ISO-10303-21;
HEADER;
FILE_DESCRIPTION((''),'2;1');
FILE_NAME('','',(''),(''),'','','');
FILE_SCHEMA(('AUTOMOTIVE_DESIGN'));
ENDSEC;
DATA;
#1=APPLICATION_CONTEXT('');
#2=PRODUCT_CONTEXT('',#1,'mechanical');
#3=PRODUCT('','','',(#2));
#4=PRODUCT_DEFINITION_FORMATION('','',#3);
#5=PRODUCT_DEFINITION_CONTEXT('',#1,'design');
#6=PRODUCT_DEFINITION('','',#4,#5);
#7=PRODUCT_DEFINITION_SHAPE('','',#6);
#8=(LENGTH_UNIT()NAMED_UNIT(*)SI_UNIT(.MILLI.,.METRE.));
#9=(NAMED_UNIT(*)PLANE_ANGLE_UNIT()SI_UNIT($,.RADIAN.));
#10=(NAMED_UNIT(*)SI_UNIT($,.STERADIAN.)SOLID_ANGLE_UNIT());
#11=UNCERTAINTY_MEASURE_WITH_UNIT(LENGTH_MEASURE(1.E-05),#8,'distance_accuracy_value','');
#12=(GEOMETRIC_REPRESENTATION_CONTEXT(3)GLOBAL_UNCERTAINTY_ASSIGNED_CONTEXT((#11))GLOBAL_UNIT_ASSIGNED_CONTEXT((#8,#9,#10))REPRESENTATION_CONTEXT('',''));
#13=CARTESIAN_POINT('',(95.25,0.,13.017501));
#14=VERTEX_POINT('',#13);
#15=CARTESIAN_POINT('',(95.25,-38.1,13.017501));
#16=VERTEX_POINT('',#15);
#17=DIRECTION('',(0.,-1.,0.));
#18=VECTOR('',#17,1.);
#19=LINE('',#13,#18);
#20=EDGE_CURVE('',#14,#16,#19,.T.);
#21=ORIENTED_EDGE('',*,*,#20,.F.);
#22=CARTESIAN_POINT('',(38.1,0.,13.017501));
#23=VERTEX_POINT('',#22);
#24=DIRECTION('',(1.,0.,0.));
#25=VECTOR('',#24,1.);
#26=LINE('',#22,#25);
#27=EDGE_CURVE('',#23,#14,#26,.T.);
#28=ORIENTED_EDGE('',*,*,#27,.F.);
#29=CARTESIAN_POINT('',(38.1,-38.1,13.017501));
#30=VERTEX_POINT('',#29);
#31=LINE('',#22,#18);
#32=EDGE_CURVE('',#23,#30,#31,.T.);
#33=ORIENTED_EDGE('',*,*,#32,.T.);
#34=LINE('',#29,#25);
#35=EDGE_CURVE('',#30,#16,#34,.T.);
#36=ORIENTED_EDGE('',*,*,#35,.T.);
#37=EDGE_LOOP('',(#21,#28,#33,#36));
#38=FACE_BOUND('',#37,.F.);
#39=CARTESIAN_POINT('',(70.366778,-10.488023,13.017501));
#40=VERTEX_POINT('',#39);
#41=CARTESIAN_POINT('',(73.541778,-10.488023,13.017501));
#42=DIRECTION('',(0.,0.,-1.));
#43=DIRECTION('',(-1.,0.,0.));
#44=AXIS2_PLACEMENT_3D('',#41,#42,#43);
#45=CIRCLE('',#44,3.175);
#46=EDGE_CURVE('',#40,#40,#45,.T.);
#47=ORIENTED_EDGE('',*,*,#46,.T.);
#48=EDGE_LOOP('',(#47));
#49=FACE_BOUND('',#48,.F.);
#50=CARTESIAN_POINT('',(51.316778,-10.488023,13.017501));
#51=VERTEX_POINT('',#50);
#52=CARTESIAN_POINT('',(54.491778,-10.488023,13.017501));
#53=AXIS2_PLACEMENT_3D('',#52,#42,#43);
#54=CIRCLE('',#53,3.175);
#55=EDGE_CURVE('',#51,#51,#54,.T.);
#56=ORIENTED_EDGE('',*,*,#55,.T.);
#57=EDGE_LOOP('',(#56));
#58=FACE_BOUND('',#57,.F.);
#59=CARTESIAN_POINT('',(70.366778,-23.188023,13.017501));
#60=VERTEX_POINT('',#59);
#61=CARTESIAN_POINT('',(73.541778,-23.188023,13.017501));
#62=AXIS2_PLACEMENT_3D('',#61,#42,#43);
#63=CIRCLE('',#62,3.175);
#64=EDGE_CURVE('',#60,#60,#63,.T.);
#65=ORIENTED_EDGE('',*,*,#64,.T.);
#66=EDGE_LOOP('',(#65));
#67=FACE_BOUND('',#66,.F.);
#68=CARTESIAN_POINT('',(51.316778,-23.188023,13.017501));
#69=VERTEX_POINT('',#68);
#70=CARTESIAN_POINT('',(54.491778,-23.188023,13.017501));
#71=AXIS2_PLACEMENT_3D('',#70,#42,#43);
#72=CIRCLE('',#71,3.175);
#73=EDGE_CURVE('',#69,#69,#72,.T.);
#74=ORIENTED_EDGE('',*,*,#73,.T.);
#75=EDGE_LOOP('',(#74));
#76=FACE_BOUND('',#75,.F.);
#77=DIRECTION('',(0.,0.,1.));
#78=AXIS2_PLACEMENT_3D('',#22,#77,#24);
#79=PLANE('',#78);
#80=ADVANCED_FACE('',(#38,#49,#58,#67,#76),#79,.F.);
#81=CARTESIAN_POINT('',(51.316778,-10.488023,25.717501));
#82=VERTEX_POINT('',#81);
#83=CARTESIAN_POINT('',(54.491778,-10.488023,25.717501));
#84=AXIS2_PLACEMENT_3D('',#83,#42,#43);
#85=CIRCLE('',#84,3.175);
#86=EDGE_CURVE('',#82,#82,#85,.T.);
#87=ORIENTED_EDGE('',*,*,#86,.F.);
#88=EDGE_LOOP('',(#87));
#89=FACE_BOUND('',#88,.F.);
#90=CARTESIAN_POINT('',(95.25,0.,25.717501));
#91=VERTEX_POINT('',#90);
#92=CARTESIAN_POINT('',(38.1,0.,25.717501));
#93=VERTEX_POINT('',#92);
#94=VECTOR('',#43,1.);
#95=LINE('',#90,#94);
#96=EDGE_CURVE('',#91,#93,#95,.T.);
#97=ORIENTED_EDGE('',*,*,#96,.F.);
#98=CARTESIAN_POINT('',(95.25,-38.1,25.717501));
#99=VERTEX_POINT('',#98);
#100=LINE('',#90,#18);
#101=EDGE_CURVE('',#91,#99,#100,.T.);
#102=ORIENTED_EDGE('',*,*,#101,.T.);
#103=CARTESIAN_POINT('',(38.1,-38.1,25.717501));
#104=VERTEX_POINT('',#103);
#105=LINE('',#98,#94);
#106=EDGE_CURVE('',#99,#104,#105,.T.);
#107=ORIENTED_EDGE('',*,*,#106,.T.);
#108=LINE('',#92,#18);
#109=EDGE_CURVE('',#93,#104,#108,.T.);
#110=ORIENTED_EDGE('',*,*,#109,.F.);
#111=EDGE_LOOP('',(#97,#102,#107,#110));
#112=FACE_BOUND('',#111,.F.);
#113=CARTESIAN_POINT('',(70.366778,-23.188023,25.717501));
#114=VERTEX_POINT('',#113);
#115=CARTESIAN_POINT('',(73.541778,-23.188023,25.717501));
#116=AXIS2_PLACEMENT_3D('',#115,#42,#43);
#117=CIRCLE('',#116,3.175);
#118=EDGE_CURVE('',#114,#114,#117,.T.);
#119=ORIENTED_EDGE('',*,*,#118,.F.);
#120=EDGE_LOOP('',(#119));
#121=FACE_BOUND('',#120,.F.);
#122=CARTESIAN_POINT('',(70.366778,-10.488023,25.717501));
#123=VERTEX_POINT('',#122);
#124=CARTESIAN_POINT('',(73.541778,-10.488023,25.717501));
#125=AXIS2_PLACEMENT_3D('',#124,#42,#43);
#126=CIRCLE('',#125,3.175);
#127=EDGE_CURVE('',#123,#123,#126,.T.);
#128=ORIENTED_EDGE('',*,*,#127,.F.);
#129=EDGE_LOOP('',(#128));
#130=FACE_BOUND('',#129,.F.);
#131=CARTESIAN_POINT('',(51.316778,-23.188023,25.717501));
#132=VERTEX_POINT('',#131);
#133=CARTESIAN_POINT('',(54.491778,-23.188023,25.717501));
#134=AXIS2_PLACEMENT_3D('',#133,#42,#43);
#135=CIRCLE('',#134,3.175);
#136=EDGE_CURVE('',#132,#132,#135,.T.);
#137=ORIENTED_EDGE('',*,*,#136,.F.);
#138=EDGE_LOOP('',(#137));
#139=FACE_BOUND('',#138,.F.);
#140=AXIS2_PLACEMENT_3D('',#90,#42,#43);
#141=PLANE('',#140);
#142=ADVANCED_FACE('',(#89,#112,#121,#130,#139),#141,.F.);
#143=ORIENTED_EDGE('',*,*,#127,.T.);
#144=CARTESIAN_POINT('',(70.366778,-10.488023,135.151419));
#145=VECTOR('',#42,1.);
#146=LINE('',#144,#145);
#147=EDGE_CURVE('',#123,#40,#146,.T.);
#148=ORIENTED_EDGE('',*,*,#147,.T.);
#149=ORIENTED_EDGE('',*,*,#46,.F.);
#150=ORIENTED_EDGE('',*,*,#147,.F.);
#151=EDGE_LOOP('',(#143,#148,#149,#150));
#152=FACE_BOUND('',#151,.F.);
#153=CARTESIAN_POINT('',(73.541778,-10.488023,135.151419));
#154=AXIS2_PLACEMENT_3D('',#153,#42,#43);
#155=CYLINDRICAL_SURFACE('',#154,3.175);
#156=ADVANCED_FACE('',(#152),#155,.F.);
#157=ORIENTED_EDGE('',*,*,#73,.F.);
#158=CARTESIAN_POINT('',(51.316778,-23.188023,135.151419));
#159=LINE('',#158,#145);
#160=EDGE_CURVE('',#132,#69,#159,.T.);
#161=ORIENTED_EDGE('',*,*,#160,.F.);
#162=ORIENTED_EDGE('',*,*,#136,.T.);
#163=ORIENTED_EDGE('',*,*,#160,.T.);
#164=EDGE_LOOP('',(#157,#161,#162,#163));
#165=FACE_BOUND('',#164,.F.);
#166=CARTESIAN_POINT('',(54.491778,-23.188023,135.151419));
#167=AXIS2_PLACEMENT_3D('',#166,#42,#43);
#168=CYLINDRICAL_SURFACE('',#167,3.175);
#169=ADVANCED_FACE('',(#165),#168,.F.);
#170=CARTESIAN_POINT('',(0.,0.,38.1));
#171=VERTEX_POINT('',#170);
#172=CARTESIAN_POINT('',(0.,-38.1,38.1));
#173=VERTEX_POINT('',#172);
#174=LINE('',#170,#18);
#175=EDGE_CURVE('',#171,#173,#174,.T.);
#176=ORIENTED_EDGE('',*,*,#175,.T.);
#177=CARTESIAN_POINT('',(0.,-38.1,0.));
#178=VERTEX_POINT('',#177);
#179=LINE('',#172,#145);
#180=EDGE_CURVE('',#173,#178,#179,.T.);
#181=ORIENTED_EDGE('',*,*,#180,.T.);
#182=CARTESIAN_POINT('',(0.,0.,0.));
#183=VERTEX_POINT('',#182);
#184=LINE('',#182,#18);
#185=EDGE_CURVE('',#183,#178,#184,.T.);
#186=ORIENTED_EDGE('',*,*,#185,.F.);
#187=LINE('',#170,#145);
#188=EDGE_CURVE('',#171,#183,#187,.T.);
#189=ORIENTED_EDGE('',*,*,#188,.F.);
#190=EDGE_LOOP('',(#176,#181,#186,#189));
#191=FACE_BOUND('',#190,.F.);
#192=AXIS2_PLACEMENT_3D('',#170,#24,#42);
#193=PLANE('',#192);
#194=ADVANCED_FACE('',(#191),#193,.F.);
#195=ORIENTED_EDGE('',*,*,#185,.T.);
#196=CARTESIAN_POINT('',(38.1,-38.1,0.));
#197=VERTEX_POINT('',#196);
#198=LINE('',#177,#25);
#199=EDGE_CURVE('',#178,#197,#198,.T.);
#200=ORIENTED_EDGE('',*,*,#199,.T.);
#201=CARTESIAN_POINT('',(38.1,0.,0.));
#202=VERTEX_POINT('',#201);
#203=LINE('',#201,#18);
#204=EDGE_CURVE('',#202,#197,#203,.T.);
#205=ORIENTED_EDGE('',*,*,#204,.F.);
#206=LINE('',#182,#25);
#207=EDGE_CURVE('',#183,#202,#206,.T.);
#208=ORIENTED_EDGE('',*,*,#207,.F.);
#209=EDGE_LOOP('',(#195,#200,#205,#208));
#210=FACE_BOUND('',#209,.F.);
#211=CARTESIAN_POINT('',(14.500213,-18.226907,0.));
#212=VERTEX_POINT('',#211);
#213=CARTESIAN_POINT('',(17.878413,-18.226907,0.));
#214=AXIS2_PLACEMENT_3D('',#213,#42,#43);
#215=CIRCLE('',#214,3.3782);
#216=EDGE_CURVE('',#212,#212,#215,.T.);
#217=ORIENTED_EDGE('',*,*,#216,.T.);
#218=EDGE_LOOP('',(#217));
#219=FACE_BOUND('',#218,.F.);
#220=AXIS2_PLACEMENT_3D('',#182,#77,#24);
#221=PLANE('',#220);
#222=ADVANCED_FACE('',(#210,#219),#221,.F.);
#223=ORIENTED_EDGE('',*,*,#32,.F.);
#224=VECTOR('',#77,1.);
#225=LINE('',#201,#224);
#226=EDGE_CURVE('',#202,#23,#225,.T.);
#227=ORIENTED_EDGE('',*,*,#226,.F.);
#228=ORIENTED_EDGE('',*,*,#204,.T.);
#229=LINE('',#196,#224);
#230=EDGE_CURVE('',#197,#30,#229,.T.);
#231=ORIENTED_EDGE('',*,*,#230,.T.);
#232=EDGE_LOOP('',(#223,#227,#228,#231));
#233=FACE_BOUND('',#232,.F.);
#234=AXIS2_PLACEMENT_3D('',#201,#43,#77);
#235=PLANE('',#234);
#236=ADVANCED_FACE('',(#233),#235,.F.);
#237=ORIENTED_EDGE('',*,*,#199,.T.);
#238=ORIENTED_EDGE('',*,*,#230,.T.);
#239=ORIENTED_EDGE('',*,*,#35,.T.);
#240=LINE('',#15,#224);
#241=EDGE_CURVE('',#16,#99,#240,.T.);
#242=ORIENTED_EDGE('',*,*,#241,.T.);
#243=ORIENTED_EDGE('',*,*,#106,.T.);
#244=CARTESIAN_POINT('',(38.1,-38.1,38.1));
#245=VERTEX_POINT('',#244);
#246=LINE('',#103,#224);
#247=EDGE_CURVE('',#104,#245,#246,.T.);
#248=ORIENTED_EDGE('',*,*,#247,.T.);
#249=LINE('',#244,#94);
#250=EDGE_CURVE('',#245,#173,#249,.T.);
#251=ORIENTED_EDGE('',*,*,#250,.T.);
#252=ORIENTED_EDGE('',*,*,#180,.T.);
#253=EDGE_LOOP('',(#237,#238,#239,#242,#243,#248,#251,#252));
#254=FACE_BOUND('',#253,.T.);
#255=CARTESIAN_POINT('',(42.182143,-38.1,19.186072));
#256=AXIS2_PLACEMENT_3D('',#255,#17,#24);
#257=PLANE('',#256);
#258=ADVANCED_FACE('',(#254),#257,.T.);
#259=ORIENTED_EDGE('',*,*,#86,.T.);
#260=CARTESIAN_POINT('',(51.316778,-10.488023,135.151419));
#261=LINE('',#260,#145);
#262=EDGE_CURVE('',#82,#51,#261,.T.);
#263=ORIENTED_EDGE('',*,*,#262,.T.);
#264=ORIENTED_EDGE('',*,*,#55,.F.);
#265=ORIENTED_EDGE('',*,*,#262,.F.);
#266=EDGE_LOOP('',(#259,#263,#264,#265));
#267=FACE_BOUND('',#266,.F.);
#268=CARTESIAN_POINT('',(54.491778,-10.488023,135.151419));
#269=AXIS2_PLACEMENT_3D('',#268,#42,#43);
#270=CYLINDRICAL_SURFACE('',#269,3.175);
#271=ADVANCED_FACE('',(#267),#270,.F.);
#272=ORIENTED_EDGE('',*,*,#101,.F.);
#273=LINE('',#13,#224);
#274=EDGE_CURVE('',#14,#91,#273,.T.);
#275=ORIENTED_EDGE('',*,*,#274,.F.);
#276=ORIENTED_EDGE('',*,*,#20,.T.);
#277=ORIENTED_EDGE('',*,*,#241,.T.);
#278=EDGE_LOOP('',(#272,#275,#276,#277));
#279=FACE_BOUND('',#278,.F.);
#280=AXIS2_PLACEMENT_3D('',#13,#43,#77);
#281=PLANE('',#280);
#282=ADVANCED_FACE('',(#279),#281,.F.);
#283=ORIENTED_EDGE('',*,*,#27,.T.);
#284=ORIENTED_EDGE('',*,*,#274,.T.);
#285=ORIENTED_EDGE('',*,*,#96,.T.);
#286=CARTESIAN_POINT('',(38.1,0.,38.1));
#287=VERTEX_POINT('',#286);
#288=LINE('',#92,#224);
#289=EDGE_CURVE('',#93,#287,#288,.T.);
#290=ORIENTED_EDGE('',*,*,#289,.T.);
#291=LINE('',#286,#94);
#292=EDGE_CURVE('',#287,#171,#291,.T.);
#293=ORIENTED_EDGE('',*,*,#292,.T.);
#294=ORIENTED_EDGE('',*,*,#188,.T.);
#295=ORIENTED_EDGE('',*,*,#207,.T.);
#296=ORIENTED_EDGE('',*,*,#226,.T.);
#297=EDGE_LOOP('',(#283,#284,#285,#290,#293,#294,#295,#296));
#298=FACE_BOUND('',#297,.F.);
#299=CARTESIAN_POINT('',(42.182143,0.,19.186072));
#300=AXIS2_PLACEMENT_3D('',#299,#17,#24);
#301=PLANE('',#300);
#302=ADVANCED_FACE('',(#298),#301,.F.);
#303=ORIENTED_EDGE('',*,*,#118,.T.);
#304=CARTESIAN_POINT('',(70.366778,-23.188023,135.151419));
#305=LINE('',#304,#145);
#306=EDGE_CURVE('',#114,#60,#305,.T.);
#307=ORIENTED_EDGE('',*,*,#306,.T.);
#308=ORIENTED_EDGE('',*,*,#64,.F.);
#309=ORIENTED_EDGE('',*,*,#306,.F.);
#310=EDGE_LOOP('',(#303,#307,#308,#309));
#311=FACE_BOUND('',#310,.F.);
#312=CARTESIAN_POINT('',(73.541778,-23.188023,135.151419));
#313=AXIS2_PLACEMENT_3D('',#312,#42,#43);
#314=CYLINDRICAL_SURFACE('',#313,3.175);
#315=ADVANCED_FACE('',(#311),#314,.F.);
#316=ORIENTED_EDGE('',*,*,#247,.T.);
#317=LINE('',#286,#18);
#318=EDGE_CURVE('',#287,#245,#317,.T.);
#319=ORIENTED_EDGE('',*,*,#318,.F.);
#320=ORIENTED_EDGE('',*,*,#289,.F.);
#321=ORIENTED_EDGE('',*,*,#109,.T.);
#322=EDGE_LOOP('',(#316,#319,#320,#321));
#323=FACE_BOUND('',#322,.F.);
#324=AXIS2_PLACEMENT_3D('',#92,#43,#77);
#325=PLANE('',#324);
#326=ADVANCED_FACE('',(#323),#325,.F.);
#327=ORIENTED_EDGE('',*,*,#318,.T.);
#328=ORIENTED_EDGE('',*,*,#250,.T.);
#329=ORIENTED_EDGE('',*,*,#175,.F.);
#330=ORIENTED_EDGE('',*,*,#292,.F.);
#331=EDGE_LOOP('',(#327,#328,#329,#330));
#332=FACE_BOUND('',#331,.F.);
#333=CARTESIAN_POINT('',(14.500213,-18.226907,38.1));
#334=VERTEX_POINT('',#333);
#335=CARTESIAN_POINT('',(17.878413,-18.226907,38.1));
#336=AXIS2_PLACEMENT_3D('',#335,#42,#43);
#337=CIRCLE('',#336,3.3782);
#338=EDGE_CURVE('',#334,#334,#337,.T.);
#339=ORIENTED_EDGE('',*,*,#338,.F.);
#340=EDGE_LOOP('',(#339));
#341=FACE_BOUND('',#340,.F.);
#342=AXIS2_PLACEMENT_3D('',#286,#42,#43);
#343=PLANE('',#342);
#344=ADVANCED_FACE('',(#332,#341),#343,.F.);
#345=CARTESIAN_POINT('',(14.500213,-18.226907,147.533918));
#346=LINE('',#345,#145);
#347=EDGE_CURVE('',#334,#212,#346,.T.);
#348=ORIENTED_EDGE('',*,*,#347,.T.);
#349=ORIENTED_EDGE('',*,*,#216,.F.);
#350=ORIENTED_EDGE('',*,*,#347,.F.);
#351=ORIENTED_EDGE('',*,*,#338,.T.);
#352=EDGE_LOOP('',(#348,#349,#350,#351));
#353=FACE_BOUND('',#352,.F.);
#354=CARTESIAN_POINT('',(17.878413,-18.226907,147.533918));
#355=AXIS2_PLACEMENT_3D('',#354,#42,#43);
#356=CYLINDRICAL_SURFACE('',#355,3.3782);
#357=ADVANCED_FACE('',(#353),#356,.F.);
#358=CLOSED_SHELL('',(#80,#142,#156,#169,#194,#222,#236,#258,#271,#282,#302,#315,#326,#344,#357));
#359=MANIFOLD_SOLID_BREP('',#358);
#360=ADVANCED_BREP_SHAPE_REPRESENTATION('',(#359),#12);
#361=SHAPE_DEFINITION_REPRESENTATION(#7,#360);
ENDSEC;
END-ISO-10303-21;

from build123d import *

# Parameters (mm, degrees)
F1_DEPTH = 38.1
F3_D     = 6.7564
F5_D     = 6.35


# Not quite as in the source:
# - the program builds the solid bodies; features that only make, move or delete a surface that nothing else refers to are left out


with BuildPart() as f1:
    # F0 (on Front) → F1 (new body)
    with BuildSketch(Plane.XZ):
        Polygon((0, 38.1), (0, 0), (38.1, 0), (38.1, 13.0175009682), (95.25, 13.0175009682), (95.25, 25.7175009682), (38.1, 25.7175009682), (38.1, 38.1), align=None)
    extrude(amount=F1_DEPTH)

    # F3 (through all)
    with Locations(Plane.XY.offset(38.1)):
        with Locations((17.8784132004, -18.2269066572)):
            Hole(F3_D / 2)

    # F5 (through all)
    with Locations(Plane.XY.offset(25.7175009682)):
        with Locations((54.4917780221, -10.4880234766), (54.4917780221, -23.1880234766), (73.5417780221, -23.1880234766), (73.5417780221, -10.4880234766)):
            Hole(F5_D / 2)


solid = f1.part
